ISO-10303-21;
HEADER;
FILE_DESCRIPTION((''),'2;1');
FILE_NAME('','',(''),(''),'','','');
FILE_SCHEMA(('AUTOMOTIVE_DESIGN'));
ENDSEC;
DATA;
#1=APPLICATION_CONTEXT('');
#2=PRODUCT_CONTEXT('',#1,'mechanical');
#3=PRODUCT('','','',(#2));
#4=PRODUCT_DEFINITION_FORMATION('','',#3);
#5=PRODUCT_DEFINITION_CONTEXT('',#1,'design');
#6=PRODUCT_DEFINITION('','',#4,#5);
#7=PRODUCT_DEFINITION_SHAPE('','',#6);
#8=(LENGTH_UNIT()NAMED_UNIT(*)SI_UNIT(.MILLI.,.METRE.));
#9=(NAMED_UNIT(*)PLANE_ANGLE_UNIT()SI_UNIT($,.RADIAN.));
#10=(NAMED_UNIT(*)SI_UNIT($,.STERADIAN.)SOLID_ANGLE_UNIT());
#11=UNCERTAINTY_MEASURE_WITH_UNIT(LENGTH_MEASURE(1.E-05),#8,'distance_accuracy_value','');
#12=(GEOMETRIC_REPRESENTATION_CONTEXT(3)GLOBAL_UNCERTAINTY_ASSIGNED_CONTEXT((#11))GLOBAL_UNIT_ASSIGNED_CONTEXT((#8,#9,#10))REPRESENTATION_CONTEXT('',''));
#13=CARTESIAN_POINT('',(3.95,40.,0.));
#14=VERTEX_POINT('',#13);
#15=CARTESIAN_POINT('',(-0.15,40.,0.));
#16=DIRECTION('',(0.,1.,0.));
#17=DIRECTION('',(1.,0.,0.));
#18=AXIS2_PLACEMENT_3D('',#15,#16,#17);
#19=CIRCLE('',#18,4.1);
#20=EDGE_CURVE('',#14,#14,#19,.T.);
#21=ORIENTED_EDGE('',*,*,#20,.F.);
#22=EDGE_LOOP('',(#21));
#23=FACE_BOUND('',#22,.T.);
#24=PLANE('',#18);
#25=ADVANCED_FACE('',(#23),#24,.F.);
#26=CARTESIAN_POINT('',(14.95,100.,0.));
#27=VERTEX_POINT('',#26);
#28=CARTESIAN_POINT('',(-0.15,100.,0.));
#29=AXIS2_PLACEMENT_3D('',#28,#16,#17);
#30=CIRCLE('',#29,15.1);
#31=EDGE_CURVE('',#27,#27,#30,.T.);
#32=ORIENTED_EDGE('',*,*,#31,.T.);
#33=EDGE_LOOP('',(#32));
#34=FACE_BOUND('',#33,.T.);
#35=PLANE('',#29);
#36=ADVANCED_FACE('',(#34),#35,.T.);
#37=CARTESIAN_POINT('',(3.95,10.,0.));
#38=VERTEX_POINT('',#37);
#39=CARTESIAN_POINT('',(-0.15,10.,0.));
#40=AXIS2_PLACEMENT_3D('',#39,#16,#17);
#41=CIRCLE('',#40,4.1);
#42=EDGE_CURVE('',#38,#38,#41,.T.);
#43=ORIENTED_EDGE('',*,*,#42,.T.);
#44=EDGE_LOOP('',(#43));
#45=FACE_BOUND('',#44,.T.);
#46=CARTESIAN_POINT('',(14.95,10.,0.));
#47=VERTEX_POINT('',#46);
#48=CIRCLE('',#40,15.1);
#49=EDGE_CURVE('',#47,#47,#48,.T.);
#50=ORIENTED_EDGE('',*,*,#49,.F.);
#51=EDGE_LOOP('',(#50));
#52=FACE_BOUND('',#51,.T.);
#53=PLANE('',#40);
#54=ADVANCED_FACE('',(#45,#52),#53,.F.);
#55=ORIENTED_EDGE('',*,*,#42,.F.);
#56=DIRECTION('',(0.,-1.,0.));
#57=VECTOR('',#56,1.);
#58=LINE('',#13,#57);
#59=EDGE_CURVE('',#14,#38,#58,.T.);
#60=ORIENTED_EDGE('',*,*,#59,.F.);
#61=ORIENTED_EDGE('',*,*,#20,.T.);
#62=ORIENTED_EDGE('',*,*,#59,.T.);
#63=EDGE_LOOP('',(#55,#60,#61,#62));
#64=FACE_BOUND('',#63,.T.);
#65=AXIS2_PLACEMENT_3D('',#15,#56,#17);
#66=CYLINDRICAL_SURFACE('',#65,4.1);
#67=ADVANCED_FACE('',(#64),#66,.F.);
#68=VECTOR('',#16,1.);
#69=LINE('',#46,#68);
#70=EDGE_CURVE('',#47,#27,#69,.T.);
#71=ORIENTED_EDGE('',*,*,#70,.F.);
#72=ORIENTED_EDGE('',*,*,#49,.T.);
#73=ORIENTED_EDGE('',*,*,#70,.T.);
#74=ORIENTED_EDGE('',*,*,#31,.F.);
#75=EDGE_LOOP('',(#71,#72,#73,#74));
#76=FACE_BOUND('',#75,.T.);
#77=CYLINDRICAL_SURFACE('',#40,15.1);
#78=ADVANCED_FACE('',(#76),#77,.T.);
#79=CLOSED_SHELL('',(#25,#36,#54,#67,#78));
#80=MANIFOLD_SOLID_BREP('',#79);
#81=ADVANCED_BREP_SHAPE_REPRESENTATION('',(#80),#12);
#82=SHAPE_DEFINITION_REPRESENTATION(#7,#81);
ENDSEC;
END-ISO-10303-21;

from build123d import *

# Parameters (mm, degrees)
F0_W = 11
F0_H = 10


# Not quite as in the source:
# - a feature names something its author has since deleted; it is built from what else it names


with BuildPart() as f1:
    # F0 (on Top) → F1 (revolve)
    with BuildSketch(Plane.XY):
        with Locations((9.45, 15)):
            Rectangle(F0_W, F0_H)
        with Locations((9.45, 25)):
            Rectangle(F0_W, F0_H)
        with Locations((9.45, 35)):
            Rectangle(F0_W, F0_H)
        Polygon((-0.15, 40), (3.95, 40), (14.95, 40), (14.95, 100), (-0.15, 100), align=None)
    revolve(axis=Axis((-0.15, 70, 0), (0, 1, 0)))


solid = f1.part
